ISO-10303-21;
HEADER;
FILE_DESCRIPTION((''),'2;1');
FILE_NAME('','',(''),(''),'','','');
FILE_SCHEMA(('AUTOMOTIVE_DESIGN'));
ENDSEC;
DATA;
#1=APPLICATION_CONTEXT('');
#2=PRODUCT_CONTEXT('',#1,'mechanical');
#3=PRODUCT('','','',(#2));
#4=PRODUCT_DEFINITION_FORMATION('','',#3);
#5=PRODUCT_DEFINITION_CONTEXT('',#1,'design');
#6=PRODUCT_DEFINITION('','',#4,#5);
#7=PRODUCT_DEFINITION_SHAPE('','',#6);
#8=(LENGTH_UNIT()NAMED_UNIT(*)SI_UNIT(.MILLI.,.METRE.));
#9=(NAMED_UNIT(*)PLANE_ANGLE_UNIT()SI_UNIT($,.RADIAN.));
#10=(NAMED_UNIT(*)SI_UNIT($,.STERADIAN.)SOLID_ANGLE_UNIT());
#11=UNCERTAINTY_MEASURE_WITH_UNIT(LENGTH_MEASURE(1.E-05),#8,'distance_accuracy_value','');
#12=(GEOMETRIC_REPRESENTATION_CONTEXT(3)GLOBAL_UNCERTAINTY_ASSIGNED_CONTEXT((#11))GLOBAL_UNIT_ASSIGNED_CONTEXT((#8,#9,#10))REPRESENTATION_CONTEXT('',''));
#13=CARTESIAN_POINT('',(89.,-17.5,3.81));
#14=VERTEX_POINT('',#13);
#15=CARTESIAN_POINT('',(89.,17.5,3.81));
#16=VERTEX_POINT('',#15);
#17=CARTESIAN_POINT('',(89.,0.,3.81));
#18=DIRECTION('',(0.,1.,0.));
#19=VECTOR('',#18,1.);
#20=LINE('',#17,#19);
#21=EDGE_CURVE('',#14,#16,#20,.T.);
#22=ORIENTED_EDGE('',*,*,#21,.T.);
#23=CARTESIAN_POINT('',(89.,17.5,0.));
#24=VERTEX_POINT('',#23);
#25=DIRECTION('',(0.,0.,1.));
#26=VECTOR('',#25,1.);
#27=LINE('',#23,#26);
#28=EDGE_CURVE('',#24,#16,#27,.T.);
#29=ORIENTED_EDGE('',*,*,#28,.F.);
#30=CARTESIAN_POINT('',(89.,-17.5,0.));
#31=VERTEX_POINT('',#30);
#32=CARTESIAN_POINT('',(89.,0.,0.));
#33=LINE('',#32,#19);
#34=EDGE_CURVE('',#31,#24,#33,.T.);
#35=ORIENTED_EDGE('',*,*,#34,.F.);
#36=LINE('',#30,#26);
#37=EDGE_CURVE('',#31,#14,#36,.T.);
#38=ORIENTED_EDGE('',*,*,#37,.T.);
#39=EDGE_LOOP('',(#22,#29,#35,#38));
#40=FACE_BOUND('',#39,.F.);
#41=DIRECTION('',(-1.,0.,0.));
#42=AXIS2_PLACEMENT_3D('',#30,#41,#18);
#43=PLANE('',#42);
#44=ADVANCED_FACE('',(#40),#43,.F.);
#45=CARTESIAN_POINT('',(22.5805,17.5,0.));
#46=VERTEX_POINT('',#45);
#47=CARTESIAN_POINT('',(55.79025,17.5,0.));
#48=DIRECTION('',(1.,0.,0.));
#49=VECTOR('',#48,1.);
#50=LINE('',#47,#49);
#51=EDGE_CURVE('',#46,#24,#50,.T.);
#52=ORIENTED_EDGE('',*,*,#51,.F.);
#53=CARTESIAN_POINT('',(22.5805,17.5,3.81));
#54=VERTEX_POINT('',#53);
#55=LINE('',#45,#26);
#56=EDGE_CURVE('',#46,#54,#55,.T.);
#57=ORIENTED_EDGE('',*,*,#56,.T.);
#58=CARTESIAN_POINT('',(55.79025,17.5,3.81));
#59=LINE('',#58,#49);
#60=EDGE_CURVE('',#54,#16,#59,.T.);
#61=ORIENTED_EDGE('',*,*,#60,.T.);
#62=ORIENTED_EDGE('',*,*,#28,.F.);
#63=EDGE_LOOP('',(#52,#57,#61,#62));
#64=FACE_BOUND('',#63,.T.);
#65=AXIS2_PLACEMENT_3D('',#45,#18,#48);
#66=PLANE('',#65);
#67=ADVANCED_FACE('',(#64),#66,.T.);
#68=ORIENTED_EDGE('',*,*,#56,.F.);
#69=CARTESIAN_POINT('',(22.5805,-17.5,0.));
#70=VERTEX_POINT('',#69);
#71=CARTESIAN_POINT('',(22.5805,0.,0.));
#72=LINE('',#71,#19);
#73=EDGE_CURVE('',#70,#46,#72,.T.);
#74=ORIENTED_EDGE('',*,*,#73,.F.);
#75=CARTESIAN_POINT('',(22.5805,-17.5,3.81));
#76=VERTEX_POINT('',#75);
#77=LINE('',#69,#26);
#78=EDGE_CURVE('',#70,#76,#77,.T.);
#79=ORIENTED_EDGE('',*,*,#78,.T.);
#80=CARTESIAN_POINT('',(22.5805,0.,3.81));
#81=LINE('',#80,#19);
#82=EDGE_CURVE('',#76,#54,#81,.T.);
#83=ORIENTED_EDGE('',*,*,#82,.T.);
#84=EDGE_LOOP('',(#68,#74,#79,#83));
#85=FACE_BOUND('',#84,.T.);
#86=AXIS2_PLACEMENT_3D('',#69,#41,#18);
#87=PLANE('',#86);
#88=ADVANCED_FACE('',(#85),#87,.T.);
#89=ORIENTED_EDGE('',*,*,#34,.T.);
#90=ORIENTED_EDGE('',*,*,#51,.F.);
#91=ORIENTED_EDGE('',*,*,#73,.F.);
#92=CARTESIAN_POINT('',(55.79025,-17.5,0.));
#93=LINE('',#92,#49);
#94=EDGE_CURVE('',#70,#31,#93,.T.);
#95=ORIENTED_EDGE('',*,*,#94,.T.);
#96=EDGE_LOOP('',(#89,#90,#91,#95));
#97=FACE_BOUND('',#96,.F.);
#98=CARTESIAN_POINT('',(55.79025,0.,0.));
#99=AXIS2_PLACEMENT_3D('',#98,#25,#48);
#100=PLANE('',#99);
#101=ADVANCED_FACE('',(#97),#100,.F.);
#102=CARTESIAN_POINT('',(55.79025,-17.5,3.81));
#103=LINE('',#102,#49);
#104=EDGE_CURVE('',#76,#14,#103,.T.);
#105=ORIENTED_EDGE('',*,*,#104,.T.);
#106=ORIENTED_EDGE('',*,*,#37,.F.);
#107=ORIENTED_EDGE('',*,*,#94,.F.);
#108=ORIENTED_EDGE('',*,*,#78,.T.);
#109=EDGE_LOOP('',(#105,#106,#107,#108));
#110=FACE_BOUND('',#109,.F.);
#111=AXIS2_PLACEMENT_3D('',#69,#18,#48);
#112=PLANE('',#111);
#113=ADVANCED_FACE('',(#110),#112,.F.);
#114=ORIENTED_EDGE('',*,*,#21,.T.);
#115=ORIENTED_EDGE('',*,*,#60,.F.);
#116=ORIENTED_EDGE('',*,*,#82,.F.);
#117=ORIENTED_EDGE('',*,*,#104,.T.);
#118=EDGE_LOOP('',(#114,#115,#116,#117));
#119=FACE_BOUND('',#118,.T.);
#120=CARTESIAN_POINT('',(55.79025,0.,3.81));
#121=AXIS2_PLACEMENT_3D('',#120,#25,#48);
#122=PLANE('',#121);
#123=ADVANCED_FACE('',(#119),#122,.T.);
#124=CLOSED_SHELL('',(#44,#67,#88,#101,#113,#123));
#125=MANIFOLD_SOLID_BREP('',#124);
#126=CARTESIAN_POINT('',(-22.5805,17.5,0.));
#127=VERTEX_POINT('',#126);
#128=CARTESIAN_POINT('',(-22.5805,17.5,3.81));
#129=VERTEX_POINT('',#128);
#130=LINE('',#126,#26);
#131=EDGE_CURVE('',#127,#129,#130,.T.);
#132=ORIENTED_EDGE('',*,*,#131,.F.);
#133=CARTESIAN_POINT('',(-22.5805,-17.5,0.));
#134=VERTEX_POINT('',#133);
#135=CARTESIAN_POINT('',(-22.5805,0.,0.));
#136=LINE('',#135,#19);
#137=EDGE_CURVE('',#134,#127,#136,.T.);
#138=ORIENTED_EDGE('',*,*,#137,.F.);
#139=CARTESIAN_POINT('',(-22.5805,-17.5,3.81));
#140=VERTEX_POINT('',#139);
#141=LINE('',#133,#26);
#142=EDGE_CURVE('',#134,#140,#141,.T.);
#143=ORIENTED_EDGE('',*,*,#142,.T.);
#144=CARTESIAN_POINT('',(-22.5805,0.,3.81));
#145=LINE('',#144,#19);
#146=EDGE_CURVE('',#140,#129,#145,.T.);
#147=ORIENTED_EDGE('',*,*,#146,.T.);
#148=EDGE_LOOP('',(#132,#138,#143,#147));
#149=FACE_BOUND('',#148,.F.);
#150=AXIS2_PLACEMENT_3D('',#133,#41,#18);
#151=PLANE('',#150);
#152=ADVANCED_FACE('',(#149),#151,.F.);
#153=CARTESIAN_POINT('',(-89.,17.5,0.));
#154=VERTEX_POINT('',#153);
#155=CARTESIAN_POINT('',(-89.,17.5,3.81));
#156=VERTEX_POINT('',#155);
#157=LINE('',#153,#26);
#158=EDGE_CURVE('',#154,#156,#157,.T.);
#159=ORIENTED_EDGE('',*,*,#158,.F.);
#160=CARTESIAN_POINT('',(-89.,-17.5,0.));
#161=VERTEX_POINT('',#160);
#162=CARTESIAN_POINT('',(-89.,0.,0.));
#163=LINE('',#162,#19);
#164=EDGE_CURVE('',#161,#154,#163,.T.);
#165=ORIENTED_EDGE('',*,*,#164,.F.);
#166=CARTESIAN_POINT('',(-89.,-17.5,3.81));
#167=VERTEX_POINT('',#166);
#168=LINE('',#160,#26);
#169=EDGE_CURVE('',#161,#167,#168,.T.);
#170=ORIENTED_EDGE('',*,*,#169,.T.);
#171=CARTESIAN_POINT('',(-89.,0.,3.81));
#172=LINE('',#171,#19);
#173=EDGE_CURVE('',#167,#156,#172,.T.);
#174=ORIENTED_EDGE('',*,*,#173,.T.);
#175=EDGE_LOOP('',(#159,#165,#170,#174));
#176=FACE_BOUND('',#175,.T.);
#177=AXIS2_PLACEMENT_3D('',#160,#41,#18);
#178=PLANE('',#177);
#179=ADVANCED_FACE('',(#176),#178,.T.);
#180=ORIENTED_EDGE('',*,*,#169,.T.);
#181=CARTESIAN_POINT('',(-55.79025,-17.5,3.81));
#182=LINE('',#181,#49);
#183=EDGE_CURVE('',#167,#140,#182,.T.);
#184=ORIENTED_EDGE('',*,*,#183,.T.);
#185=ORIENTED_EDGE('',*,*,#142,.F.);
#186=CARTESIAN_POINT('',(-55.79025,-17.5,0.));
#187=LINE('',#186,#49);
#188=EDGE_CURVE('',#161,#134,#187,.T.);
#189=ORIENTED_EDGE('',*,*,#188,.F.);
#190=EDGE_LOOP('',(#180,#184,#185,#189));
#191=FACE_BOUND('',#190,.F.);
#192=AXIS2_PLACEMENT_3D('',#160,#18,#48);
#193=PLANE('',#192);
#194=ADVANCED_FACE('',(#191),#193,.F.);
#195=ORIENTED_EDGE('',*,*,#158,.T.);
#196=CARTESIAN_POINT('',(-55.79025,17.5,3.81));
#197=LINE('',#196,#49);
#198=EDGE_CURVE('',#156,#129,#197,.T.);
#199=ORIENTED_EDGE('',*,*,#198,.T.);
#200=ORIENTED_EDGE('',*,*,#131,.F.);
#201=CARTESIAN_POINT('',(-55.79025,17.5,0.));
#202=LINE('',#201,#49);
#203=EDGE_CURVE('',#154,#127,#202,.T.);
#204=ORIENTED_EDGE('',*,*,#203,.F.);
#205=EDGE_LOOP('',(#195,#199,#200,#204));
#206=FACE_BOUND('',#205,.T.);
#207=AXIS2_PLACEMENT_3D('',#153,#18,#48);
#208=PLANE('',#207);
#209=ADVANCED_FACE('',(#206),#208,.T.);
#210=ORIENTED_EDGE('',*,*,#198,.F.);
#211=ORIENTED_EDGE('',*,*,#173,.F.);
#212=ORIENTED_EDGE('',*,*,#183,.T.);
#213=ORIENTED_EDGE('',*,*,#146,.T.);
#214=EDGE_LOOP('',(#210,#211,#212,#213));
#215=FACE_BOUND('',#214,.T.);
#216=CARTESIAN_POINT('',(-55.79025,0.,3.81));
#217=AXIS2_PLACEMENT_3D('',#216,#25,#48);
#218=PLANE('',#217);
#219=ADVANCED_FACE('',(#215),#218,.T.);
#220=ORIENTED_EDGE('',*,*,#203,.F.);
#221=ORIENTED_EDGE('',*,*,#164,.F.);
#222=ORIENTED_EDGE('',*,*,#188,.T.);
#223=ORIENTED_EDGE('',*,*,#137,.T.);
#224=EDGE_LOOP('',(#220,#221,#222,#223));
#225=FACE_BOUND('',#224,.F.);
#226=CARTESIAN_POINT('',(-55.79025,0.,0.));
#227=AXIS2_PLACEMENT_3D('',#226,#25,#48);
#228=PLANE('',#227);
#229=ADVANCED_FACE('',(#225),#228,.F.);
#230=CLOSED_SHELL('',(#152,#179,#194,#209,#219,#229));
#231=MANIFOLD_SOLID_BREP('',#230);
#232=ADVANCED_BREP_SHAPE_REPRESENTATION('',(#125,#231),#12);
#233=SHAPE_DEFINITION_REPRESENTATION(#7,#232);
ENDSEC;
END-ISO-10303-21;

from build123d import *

# Parameters (mm, degrees)
F0_W     = 66.4195
F0_H     = 35
F1_DEPTH = 3.81


# Not quite as in the source:
# - a feature names something its author has since deleted; it is built from what else it names


with BuildPart() as f1:
    # F0 (on Top) → F1 (new body)
    with BuildSketch(Plane.XY):
        with Locations((-55.79025, 0)):
            Rectangle(F0_W, F0_H)
    extrude(amount=F1_DEPTH)


with BuildPart() as f1b:
    # F0 (on Top) → F1, piece 2 (new body)
    with BuildSketch(Plane.XY):
        with Locations((55.79025, 0)):
            Rectangle(F0_W, F0_H)
    extrude(amount=F1_DEPTH)


solid = Compound([f1.part, f1b.part])
